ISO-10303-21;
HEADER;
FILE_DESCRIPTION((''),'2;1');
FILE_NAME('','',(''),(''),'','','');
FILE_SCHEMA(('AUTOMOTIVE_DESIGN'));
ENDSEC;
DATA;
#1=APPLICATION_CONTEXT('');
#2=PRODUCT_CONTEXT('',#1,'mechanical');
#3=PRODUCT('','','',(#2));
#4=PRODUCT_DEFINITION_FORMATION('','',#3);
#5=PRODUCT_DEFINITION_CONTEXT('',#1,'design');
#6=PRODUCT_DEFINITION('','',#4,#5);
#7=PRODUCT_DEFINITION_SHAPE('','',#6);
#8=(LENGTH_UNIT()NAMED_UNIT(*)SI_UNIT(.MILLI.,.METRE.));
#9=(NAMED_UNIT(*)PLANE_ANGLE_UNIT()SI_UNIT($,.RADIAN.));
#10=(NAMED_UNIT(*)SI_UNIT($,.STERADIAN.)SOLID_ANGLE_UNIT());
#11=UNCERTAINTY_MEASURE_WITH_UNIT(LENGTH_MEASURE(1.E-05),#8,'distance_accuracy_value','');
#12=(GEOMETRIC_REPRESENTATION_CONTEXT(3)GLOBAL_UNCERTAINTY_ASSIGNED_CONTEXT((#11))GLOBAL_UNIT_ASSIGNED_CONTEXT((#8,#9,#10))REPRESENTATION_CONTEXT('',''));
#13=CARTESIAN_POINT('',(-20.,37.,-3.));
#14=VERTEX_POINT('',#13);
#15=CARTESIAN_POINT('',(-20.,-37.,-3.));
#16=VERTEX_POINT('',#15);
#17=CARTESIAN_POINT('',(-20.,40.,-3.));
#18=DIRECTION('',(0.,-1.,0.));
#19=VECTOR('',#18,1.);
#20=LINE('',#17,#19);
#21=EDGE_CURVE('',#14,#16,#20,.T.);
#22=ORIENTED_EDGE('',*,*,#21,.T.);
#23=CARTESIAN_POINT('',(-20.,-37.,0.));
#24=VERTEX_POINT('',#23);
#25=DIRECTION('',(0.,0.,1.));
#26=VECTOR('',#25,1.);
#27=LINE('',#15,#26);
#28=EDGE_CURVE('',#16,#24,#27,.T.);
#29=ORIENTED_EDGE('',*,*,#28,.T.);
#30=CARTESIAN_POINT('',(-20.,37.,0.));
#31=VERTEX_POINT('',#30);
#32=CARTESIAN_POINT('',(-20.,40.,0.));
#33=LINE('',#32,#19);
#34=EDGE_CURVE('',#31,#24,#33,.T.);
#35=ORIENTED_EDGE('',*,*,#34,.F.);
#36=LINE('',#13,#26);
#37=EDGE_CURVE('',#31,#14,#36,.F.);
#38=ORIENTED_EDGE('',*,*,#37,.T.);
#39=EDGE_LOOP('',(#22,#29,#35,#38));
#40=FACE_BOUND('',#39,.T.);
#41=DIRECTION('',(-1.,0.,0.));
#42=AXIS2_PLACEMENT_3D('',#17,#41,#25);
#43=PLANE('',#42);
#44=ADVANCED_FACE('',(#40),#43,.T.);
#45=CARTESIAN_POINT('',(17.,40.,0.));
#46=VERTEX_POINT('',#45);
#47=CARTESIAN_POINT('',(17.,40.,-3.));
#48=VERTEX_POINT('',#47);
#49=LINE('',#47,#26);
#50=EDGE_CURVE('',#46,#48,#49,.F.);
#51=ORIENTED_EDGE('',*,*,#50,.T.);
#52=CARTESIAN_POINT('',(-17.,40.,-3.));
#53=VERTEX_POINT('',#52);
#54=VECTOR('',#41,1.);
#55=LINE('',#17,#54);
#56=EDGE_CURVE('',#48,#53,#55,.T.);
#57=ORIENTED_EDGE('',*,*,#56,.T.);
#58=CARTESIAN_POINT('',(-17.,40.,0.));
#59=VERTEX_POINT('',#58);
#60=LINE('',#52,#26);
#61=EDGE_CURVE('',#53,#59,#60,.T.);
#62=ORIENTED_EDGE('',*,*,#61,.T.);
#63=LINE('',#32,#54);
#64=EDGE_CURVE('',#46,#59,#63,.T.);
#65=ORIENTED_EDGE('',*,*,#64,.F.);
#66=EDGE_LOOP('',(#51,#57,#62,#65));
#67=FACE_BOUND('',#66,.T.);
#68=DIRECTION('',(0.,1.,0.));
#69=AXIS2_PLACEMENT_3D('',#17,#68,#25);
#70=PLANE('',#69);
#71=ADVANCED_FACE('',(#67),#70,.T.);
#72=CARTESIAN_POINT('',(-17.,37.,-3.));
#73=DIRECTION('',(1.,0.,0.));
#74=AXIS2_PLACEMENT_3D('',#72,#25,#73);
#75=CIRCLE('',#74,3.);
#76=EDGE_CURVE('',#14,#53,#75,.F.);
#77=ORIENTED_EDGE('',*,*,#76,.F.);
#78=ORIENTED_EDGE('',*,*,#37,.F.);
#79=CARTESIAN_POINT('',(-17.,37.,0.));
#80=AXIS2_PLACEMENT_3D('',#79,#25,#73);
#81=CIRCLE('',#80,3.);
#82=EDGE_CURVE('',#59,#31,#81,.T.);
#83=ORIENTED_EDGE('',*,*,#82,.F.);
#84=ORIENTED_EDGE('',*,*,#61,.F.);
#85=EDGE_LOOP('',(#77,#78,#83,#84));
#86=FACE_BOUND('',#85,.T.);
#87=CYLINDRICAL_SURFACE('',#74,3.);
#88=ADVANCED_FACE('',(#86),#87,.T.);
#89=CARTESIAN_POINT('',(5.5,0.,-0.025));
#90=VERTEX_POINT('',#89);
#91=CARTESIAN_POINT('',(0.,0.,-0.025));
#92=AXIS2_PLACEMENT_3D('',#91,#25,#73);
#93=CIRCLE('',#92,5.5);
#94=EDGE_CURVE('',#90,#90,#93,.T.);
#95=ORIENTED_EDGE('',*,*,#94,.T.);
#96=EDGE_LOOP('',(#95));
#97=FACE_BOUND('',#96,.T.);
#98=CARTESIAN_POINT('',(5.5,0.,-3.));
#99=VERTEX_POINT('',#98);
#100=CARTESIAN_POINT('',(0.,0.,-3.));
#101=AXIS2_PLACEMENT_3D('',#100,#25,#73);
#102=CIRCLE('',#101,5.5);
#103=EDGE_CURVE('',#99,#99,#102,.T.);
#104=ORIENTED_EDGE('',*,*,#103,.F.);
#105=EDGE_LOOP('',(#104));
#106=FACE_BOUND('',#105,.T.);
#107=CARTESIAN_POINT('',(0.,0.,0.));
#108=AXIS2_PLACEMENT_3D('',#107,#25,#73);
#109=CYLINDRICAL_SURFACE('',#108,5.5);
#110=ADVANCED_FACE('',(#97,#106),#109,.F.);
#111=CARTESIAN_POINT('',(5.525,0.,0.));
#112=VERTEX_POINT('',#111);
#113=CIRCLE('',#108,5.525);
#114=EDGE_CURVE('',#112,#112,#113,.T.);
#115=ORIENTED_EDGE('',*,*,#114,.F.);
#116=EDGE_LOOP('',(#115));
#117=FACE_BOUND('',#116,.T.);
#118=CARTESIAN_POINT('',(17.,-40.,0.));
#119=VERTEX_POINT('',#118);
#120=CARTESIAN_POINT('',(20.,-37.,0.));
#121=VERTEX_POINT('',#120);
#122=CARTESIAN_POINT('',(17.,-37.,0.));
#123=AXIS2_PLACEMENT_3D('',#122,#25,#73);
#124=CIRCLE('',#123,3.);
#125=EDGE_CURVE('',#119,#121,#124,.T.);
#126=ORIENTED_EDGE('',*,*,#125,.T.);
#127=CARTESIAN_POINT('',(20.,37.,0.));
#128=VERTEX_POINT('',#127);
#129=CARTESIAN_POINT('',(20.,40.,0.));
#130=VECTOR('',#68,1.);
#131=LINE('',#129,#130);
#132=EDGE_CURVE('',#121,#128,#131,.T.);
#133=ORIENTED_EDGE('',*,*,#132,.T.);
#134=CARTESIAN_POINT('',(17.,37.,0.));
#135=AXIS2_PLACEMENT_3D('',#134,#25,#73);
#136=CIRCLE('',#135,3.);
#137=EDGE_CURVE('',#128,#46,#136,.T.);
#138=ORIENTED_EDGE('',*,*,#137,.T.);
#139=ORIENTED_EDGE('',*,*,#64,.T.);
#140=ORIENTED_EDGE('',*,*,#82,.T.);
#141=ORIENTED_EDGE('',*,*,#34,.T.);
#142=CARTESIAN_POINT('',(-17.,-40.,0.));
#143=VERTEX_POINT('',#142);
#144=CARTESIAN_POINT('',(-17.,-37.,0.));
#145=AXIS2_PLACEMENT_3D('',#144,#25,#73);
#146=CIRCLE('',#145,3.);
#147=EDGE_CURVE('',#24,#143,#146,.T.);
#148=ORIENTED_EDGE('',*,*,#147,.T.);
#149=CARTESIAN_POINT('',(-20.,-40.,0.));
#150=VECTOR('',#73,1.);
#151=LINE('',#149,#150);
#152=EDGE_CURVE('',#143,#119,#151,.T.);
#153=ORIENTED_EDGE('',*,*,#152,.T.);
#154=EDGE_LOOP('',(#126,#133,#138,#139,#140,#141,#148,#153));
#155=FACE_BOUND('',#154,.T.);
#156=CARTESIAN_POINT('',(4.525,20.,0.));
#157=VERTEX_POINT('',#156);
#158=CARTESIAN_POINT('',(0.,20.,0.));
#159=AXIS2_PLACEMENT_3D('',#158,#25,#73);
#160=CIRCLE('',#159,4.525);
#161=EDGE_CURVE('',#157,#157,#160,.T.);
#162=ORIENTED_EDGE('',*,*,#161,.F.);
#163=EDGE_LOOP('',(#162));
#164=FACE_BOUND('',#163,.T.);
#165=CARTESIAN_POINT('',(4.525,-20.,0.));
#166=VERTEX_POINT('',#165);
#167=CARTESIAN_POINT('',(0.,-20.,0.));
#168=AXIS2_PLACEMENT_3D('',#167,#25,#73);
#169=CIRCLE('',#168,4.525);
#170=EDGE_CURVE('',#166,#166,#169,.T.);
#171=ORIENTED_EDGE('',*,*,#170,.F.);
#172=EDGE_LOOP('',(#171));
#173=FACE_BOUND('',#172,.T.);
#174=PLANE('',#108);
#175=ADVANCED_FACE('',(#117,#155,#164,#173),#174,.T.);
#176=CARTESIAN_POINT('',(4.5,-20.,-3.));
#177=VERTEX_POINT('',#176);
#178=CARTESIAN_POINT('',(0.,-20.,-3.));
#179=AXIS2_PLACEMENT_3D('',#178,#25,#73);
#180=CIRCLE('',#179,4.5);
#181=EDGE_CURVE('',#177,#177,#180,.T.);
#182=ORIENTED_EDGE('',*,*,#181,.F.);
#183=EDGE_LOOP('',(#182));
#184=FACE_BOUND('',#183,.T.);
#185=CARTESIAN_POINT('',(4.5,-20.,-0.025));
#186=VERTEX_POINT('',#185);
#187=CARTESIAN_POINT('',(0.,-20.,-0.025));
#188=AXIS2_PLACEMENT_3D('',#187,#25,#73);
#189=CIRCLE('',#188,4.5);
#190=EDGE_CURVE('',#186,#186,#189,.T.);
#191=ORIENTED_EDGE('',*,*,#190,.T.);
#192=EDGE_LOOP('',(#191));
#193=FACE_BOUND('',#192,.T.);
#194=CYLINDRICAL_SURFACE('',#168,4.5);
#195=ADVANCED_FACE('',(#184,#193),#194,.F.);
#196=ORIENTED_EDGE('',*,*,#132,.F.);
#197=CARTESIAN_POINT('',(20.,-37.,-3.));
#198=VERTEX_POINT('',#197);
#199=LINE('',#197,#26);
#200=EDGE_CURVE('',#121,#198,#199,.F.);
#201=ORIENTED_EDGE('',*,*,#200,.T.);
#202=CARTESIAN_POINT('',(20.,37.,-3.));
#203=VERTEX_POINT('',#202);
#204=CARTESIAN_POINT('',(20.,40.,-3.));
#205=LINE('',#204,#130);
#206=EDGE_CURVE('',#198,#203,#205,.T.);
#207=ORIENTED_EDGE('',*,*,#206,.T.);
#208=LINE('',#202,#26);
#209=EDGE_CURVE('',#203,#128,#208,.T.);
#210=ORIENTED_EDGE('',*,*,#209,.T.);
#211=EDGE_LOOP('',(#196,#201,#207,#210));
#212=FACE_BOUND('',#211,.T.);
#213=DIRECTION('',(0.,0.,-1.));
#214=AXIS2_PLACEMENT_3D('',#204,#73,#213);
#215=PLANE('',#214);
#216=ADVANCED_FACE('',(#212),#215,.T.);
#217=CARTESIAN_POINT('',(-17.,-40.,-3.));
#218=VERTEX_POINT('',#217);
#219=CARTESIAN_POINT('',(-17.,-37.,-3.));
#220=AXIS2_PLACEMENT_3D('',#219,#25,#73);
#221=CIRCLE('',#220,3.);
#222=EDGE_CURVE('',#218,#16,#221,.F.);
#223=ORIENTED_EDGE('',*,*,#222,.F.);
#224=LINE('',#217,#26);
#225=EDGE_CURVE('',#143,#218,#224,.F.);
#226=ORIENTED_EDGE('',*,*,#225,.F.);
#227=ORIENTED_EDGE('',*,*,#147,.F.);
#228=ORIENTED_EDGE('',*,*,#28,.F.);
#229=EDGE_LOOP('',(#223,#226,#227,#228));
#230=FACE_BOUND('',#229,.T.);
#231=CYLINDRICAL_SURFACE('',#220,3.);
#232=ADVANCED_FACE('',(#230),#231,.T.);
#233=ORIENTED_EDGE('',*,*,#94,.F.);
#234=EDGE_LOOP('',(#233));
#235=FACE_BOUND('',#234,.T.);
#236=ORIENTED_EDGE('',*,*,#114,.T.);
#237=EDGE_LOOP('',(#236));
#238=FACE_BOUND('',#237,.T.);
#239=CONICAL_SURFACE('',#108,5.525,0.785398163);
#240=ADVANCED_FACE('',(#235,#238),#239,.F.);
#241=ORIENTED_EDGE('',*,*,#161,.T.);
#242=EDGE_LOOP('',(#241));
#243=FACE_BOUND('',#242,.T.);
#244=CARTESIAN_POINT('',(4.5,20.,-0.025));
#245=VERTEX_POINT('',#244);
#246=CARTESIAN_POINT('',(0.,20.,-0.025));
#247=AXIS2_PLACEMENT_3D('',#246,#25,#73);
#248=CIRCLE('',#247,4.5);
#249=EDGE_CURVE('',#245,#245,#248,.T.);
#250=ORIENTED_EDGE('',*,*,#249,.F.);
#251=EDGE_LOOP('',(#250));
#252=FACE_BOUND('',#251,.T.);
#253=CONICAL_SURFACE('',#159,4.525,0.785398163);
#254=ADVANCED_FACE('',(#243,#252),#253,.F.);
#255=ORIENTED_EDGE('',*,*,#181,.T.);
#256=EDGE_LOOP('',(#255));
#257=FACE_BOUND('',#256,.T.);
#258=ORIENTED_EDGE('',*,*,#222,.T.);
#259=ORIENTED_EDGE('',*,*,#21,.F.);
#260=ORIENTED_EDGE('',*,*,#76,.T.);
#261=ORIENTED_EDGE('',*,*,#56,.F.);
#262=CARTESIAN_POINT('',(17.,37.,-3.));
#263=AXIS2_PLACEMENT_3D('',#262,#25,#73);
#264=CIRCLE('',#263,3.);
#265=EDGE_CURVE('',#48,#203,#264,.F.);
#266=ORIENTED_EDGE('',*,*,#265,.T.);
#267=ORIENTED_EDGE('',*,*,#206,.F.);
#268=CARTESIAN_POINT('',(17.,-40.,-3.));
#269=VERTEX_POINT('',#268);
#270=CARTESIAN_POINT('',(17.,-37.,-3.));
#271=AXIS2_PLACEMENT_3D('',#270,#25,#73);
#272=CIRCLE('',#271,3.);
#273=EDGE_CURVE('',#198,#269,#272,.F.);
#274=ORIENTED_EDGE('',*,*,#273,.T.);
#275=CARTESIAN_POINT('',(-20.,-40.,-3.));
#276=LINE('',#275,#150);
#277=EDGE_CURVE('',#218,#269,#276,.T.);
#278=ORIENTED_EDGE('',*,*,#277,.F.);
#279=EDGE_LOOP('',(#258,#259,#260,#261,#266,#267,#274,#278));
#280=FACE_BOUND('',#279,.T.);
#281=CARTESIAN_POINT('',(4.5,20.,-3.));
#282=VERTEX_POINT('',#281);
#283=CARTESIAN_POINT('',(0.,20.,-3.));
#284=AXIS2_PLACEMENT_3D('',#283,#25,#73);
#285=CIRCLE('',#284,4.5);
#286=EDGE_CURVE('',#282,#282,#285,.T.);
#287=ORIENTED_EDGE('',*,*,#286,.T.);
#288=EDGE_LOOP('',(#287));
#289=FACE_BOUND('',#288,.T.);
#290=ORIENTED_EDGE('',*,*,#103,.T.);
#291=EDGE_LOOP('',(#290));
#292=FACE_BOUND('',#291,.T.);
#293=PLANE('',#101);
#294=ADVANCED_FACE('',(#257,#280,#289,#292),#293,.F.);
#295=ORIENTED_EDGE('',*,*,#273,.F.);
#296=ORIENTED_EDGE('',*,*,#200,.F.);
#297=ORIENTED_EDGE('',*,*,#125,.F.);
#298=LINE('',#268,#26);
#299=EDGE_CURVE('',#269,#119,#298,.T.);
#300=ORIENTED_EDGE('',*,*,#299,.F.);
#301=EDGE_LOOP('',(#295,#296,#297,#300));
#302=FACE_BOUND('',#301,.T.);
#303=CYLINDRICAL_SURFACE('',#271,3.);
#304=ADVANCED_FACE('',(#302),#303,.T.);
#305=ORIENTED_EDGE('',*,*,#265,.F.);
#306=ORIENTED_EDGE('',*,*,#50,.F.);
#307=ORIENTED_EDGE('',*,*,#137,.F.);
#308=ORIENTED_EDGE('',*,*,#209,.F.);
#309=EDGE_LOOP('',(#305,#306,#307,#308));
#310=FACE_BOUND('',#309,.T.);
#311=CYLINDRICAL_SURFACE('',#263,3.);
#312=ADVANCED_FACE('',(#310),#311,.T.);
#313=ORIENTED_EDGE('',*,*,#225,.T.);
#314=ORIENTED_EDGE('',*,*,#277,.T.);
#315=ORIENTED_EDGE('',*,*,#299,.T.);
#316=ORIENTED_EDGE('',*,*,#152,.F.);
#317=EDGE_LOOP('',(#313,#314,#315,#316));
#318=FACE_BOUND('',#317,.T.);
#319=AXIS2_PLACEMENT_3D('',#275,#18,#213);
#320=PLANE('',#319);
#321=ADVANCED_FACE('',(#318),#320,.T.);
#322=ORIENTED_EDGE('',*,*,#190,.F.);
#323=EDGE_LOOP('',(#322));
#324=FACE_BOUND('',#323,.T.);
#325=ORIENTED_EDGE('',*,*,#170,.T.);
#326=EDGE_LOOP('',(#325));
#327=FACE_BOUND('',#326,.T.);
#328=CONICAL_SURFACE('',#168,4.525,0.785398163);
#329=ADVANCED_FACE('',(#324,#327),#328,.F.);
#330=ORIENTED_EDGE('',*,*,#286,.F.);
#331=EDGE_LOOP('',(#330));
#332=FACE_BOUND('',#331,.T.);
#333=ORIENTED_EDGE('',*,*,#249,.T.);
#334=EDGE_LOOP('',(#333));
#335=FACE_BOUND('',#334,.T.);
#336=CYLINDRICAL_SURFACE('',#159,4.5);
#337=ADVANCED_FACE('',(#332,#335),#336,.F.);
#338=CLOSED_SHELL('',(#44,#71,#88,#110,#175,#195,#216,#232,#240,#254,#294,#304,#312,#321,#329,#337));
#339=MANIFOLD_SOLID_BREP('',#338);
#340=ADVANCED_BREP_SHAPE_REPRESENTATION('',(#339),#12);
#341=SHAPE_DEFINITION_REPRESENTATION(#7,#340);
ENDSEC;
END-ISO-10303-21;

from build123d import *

# Parameters (mm, degrees)
SKETCH_1_W                    = 40
SKETCH_1_H                    = 80
SM_BASE_FLANGE_1_DEPTH        = 3
OTHER_START                   = -3
OTHER_1_DEPTH                 = 3
HOLE_WIZARD_M8_1_D            = 9
HOLE_WIZARD_M8_1_DEPTH        = 12.4
HOLE_WIZARD_M8_1_CSINK_D      = 9.05
HOLE_WIZARD_M8_1_CSINK_ANGLE  = 90
HOLE_WIZARD_M8_1_TIP          = 2.703872786
HOLE_WIZARD_M10_1_D           = 11
HOLE_WIZARD_M10_1_DEPTH       = 12.4
HOLE_WIZARD_M10_1_CSINK_D     = 11.05
HOLE_WIZARD_M10_1_CSINK_ANGLE = 90
HOLE_WIZARD_M10_1_TIP         = 3.304733405


# Read off the part's stored shape, not the designer's step: 断开-边角1
# Sheet-metal steps are written as plain solids
with BuildPart() as part:
    # Sketch 1 → 基体-法兰1 (new body)
    with BuildSketch(Plane.XY):
        Rectangle(SKETCH_1_W, SKETCH_1_H)
    extrude(amount=-SM_BASE_FLANGE_1_DEPTH)

    # Other 1 outline → Other 1 (cut)
    with BuildSketch(Plane.XY.offset(OTHER_START)):
        with BuildLine():
            ThreePointArc((20, -37), (19.121320344, -39.121320344), (17, -40))
            Line((17, -40), (20, -40))
            Line((20, -40), (20, -37))
        make_face()
        with BuildLine():
            Line((-20, -40), (-17, -40))
            ThreePointArc((-17, -40), (-19.121320344, -39.121320344), (-20, -37))
            Line((-20, -37), (-20, -40))
        make_face()
        with BuildLine():
            ThreePointArc((17, 40), (19.121320344, 39.121320344), (20, 37))
            Line((20, 37), (20, 40))
            Line((20, 40), (17, 40))
        make_face()
        with BuildLine():
            Line((-20, 40), (-20, 37))
            ThreePointArc((-20, 37), (-19.121320344, 39.121320344), (-17, 40))
            Line((-17, 40), (-20, 40))
        make_face()
    extrude(amount=OTHER_1_DEPTH, mode=Mode.SUBTRACT)

    # M8 间隙孔1
    with Locations(Plane.XY):
        with Locations((0, 20), (0, -20)):
            CounterSinkHole(HOLE_WIZARD_M8_1_D / 2, HOLE_WIZARD_M8_1_CSINK_D / 2, depth=HOLE_WIZARD_M8_1_DEPTH, counter_sink_angle=HOLE_WIZARD_M8_1_CSINK_ANGLE)
            with Locations((0, 0, -(HOLE_WIZARD_M8_1_DEPTH + HOLE_WIZARD_M8_1_TIP / 2))):  # 118° drill point
                Cone(0, HOLE_WIZARD_M8_1_D / 2, HOLE_WIZARD_M8_1_TIP, mode=Mode.SUBTRACT)

    # M10 间隙孔1
    with Locations(Plane.XY):
        with Locations((0, 0)):
            CounterSinkHole(HOLE_WIZARD_M10_1_D / 2, HOLE_WIZARD_M10_1_CSINK_D / 2, depth=HOLE_WIZARD_M10_1_DEPTH, counter_sink_angle=HOLE_WIZARD_M10_1_CSINK_ANGLE)
            with Locations((0, 0, -(HOLE_WIZARD_M10_1_DEPTH + HOLE_WIZARD_M10_1_TIP / 2))):  # 118° drill point
                Cone(0, HOLE_WIZARD_M10_1_D / 2, HOLE_WIZARD_M10_1_TIP, mode=Mode.SUBTRACT)


solid = part.part
